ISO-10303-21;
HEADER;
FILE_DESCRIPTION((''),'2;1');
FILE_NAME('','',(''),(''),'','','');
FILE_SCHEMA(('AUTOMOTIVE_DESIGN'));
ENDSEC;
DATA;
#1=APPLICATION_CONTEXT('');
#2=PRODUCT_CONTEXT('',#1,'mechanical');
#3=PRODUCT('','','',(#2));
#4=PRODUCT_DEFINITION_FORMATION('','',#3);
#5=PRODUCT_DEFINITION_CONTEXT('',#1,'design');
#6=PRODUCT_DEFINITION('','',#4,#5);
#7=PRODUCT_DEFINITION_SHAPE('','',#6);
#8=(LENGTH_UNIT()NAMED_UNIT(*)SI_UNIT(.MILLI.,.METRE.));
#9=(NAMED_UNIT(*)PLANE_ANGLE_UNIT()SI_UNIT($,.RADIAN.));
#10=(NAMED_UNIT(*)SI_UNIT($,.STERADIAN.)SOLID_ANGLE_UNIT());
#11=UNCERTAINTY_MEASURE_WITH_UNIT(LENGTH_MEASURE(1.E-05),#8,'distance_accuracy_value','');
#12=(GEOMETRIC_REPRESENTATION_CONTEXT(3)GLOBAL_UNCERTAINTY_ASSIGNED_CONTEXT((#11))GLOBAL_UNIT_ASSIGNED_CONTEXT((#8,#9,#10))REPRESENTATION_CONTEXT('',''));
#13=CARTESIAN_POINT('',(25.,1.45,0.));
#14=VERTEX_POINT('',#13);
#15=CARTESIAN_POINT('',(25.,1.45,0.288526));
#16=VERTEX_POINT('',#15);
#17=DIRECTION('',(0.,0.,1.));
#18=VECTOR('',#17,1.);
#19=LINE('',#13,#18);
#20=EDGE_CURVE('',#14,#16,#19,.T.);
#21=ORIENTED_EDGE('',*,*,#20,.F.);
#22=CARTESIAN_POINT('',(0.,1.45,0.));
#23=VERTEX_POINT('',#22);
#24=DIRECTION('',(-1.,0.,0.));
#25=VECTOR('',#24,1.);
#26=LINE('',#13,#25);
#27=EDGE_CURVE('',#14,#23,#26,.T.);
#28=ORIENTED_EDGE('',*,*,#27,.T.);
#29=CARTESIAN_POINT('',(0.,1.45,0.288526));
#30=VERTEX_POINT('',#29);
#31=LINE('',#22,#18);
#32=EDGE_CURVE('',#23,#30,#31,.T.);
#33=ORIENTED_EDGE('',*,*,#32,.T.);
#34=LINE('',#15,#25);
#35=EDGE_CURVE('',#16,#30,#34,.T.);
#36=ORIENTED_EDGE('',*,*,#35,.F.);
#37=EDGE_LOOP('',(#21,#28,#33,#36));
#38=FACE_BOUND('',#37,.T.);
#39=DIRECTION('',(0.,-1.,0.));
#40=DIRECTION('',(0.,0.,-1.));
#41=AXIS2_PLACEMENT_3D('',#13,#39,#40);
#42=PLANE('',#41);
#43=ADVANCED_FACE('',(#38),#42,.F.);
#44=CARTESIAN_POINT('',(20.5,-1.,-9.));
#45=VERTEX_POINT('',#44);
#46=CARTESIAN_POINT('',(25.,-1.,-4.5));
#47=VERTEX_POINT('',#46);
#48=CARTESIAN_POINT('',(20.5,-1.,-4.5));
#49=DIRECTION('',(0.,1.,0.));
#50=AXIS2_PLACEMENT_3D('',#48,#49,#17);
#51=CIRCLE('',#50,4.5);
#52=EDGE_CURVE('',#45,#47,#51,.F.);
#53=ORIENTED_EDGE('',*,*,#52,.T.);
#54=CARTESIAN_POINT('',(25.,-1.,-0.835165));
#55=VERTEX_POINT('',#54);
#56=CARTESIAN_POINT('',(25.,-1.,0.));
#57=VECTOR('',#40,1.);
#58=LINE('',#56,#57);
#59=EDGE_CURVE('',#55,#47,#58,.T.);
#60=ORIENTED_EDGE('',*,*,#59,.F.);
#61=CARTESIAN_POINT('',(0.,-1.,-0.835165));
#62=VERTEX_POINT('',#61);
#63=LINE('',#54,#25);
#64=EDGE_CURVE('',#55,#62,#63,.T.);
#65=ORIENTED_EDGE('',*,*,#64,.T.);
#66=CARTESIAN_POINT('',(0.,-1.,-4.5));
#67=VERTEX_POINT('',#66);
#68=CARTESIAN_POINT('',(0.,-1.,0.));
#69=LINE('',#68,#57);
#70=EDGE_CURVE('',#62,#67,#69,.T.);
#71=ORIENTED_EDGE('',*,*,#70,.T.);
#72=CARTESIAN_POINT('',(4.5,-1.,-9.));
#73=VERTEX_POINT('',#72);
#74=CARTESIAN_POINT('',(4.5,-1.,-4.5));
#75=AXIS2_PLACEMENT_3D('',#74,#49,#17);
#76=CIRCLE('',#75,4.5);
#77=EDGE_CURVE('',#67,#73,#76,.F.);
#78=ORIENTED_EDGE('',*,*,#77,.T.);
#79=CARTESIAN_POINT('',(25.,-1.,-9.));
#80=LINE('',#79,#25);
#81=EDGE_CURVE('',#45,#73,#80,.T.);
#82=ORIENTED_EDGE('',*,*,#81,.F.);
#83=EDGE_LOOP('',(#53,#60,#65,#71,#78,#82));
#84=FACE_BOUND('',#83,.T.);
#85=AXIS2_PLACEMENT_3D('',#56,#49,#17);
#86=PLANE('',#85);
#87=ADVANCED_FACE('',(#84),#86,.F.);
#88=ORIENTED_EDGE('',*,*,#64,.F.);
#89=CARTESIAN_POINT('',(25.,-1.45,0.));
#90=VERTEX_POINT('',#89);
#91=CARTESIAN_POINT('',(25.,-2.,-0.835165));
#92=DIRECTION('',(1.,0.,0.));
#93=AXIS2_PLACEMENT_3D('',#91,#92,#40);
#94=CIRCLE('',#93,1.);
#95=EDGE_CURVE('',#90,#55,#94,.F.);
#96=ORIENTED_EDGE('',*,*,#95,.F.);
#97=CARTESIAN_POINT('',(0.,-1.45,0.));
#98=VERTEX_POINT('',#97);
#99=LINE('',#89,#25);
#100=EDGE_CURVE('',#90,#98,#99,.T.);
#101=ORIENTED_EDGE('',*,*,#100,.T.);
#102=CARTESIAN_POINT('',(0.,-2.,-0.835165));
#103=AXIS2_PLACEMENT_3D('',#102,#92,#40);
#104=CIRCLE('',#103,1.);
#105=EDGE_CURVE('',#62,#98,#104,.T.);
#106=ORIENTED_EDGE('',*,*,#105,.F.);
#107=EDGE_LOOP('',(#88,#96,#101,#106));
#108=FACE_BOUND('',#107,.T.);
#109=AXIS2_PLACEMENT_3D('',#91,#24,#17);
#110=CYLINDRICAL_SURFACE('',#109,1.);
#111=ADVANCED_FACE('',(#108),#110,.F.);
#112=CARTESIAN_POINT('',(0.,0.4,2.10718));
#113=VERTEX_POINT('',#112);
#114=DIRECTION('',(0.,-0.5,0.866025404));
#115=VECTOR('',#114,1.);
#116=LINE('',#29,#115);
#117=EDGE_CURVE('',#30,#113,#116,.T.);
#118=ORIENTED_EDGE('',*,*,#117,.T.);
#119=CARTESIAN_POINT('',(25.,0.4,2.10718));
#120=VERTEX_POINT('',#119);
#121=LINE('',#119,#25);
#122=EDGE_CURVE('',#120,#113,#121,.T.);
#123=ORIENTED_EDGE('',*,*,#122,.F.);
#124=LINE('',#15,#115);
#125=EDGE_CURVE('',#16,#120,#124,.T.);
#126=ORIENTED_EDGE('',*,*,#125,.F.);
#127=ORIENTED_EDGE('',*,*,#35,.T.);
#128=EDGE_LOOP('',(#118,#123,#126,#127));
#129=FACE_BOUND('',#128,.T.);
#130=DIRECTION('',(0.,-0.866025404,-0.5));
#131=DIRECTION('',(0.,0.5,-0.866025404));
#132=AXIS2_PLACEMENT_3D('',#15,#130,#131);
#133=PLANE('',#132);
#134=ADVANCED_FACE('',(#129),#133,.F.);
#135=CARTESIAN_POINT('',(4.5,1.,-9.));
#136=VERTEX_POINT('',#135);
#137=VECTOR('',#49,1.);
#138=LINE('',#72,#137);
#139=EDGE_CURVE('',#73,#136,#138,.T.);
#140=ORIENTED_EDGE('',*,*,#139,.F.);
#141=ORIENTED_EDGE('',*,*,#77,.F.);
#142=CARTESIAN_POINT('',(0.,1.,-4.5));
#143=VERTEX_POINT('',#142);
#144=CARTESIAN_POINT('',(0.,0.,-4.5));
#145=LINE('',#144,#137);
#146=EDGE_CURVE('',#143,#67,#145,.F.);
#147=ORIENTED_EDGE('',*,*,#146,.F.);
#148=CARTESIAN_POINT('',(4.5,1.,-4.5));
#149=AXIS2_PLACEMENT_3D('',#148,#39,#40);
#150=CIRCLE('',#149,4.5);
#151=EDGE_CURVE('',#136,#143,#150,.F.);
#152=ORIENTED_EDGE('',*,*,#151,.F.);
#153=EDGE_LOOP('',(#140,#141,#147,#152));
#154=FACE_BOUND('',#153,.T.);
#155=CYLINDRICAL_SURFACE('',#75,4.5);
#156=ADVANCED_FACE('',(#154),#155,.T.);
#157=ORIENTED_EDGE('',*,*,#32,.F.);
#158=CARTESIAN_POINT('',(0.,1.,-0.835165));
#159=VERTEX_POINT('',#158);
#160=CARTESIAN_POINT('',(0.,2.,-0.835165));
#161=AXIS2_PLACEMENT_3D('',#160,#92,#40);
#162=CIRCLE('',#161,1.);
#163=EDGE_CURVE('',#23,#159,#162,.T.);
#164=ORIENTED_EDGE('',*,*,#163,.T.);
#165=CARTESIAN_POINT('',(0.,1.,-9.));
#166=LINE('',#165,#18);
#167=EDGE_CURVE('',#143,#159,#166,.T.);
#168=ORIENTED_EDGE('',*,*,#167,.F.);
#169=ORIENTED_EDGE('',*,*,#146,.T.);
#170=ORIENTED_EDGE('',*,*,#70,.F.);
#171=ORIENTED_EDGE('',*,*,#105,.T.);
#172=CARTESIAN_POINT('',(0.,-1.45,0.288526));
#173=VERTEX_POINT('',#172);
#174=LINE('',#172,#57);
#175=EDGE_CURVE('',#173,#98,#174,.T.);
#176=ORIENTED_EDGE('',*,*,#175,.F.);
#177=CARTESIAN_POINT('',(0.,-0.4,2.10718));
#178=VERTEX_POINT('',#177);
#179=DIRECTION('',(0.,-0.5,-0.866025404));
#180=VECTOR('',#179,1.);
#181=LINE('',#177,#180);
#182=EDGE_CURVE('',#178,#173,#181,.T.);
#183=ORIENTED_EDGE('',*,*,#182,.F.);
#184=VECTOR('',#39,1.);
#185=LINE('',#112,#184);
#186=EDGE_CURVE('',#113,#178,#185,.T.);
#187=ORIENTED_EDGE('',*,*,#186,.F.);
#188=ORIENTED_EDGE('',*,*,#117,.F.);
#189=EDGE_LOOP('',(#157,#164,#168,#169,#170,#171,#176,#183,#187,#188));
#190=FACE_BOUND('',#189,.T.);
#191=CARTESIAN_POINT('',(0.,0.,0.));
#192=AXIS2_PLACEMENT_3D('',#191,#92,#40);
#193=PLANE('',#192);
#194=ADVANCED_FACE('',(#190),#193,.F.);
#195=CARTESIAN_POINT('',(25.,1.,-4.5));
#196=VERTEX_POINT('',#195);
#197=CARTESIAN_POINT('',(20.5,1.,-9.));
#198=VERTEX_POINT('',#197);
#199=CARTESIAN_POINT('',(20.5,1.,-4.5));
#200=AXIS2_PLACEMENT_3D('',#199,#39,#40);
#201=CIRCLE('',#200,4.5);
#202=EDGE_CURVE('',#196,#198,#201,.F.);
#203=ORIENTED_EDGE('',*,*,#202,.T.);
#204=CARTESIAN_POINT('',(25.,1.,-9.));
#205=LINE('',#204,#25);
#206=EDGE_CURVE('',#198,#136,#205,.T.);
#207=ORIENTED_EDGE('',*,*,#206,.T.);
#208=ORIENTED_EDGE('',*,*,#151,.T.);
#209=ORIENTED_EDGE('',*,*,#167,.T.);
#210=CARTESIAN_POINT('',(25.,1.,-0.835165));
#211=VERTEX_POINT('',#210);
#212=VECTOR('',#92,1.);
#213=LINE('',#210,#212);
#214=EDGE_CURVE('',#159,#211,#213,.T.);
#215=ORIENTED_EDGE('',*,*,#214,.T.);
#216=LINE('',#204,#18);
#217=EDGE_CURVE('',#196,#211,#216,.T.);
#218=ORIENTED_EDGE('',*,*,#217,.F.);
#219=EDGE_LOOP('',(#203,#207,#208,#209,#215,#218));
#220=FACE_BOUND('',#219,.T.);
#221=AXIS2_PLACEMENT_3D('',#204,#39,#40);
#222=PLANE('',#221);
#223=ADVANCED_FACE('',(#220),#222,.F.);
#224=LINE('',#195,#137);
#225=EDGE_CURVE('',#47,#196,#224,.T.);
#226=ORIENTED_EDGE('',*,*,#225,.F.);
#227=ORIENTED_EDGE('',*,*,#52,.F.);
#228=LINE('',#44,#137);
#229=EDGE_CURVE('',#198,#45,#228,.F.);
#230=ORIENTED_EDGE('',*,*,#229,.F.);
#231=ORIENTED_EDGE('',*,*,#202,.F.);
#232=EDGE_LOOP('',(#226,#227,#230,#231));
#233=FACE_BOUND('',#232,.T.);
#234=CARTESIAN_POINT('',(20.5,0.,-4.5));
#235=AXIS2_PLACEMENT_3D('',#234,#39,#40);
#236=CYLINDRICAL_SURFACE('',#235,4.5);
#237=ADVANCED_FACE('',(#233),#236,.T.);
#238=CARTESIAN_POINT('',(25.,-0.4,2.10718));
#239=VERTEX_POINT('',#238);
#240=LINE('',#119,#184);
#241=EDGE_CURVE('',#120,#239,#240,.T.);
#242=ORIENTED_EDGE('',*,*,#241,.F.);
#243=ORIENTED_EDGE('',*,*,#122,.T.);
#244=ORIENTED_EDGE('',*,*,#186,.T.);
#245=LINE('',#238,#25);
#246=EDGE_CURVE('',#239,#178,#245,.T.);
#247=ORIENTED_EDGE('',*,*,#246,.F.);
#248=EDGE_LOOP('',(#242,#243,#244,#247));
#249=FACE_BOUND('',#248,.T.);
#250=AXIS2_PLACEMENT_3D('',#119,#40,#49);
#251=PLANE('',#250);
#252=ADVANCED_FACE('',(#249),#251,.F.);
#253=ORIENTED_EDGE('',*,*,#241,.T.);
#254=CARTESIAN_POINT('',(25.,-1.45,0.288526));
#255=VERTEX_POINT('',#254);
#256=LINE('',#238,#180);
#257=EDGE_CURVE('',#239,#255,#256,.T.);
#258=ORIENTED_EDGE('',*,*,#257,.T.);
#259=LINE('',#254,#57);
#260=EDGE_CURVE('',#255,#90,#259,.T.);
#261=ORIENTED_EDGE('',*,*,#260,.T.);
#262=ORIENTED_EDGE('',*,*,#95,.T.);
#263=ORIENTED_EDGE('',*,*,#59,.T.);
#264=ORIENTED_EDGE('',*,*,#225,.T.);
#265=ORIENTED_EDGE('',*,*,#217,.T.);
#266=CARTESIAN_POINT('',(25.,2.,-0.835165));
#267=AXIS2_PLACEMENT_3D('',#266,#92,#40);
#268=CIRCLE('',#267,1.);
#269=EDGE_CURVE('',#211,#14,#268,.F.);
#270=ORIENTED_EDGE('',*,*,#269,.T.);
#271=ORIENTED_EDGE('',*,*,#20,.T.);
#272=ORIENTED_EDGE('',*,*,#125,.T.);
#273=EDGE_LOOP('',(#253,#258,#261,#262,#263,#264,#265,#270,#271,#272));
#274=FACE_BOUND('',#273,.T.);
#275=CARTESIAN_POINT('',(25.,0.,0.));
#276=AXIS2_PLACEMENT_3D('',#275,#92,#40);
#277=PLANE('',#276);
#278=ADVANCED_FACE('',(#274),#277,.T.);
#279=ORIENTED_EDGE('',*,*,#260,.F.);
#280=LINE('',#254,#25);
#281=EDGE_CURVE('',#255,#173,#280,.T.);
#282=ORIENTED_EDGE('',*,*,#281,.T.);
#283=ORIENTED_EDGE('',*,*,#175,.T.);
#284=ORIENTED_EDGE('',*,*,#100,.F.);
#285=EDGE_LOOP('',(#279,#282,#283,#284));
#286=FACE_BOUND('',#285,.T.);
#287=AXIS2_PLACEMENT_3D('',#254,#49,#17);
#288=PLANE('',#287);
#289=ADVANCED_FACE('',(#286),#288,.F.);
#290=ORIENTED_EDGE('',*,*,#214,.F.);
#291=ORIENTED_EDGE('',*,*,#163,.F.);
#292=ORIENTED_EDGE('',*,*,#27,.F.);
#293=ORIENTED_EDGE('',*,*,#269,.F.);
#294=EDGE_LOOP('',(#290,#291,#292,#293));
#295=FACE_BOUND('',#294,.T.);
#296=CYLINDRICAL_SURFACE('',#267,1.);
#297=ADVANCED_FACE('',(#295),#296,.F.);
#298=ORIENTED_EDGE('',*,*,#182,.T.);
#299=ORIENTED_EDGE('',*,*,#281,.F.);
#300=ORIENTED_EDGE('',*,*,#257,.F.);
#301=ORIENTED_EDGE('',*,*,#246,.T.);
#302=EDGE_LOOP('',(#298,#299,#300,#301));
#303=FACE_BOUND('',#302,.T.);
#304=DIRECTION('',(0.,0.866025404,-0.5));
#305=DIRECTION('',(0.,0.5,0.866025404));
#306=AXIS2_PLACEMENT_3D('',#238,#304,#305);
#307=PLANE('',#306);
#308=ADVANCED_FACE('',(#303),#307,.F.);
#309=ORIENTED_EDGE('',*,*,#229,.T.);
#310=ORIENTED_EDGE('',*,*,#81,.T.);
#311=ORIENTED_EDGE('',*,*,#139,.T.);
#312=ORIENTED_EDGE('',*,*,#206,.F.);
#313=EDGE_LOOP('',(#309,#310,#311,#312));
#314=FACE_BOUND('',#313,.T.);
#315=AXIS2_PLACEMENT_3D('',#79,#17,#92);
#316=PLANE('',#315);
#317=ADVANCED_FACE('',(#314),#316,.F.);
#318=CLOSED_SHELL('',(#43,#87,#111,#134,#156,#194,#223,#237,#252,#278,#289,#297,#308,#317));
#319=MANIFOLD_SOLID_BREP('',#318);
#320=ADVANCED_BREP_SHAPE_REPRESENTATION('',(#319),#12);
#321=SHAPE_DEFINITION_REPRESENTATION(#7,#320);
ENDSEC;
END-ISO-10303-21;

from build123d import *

# Parameters (mm, degrees)
CONNECTION_EXTRUDE_DEPTH = 25
TOP_FILLETS_R            = 4.5
CONNECTION_FILLETS_R     = 1


with BuildPart() as part:
    # Connection Sketch → Connection Extrude (new body)
    with BuildSketch(Plane(origin=(0, 0, 0), x_dir=(0, 0, -1), z_dir=(1, 0, 0))):
        Polygon((0, 1.45), (0, 1), (9, 1), (9, -1), (0, -1), (0, -1.45), (-0.288526329, -1.45), (-2.107179677, -0.4), (-2.107179677, 0.4), (-0.288526329, 1.45), align=None)
    extrude(amount=CONNECTION_EXTRUDE_DEPTH)

    # Top Fillets
    top_fillets_edges = [part.edges().sort_by_distance(p)[0] for p in [
        (0, 0, -9),
        (25, 0, -9),
    ]]
    fillet(top_fillets_edges, radius=TOP_FILLETS_R)

    # Connection Fillets
    # the kernel refuses this fillet: 1 mm, written as the material it adds along each edge
    with BuildSketch(Plane(origin=(0, 1, 0), x_dir=(0, 0, -1), z_dir=(1, 0, 0))) as connection_fillets_piece_1:
        with BuildLine():
            CenterArc((0.835164654, 1), CONNECTION_FILLETS_R, 213.367012969, 56.632987031)
            Line((0, 0.45), (-0.016703293, 0.439))
            ThreePointArc((-0.016703293, 0.439), (-0.02, 0.225), (-0.02, 0))
            Line((-0.02, 0), (0, -0.02))
            Line((0, -0.02), (0.835164654, -0.02))
            Line((0.835164654, -0.02), (0.835164654, 0))
        make_face()
    extrude(amount=25)
    with BuildSketch(Plane(origin=(0, -1, 0), x_dir=(0, 0, -1), z_dir=(1, 0, 0))) as connection_fillets_piece_2:
        with BuildLine():
            CenterArc((0.835164654, -1), CONNECTION_FILLETS_R, 90, 56.632987031)
            Line((0, -0.45), (-0.016703293, -0.439))
            ThreePointArc((-0.016703293, -0.439), (-0.02, -0.225), (-0.02, 0))
            Line((-0.02, 0), (0, 0.02))
            Line((0, 0.02), (0.835164654, 0.02))
            Line((0.835164654, 0.02), (0.835164654, 0))
        make_face()
    extrude(amount=25)


solid = part.part
